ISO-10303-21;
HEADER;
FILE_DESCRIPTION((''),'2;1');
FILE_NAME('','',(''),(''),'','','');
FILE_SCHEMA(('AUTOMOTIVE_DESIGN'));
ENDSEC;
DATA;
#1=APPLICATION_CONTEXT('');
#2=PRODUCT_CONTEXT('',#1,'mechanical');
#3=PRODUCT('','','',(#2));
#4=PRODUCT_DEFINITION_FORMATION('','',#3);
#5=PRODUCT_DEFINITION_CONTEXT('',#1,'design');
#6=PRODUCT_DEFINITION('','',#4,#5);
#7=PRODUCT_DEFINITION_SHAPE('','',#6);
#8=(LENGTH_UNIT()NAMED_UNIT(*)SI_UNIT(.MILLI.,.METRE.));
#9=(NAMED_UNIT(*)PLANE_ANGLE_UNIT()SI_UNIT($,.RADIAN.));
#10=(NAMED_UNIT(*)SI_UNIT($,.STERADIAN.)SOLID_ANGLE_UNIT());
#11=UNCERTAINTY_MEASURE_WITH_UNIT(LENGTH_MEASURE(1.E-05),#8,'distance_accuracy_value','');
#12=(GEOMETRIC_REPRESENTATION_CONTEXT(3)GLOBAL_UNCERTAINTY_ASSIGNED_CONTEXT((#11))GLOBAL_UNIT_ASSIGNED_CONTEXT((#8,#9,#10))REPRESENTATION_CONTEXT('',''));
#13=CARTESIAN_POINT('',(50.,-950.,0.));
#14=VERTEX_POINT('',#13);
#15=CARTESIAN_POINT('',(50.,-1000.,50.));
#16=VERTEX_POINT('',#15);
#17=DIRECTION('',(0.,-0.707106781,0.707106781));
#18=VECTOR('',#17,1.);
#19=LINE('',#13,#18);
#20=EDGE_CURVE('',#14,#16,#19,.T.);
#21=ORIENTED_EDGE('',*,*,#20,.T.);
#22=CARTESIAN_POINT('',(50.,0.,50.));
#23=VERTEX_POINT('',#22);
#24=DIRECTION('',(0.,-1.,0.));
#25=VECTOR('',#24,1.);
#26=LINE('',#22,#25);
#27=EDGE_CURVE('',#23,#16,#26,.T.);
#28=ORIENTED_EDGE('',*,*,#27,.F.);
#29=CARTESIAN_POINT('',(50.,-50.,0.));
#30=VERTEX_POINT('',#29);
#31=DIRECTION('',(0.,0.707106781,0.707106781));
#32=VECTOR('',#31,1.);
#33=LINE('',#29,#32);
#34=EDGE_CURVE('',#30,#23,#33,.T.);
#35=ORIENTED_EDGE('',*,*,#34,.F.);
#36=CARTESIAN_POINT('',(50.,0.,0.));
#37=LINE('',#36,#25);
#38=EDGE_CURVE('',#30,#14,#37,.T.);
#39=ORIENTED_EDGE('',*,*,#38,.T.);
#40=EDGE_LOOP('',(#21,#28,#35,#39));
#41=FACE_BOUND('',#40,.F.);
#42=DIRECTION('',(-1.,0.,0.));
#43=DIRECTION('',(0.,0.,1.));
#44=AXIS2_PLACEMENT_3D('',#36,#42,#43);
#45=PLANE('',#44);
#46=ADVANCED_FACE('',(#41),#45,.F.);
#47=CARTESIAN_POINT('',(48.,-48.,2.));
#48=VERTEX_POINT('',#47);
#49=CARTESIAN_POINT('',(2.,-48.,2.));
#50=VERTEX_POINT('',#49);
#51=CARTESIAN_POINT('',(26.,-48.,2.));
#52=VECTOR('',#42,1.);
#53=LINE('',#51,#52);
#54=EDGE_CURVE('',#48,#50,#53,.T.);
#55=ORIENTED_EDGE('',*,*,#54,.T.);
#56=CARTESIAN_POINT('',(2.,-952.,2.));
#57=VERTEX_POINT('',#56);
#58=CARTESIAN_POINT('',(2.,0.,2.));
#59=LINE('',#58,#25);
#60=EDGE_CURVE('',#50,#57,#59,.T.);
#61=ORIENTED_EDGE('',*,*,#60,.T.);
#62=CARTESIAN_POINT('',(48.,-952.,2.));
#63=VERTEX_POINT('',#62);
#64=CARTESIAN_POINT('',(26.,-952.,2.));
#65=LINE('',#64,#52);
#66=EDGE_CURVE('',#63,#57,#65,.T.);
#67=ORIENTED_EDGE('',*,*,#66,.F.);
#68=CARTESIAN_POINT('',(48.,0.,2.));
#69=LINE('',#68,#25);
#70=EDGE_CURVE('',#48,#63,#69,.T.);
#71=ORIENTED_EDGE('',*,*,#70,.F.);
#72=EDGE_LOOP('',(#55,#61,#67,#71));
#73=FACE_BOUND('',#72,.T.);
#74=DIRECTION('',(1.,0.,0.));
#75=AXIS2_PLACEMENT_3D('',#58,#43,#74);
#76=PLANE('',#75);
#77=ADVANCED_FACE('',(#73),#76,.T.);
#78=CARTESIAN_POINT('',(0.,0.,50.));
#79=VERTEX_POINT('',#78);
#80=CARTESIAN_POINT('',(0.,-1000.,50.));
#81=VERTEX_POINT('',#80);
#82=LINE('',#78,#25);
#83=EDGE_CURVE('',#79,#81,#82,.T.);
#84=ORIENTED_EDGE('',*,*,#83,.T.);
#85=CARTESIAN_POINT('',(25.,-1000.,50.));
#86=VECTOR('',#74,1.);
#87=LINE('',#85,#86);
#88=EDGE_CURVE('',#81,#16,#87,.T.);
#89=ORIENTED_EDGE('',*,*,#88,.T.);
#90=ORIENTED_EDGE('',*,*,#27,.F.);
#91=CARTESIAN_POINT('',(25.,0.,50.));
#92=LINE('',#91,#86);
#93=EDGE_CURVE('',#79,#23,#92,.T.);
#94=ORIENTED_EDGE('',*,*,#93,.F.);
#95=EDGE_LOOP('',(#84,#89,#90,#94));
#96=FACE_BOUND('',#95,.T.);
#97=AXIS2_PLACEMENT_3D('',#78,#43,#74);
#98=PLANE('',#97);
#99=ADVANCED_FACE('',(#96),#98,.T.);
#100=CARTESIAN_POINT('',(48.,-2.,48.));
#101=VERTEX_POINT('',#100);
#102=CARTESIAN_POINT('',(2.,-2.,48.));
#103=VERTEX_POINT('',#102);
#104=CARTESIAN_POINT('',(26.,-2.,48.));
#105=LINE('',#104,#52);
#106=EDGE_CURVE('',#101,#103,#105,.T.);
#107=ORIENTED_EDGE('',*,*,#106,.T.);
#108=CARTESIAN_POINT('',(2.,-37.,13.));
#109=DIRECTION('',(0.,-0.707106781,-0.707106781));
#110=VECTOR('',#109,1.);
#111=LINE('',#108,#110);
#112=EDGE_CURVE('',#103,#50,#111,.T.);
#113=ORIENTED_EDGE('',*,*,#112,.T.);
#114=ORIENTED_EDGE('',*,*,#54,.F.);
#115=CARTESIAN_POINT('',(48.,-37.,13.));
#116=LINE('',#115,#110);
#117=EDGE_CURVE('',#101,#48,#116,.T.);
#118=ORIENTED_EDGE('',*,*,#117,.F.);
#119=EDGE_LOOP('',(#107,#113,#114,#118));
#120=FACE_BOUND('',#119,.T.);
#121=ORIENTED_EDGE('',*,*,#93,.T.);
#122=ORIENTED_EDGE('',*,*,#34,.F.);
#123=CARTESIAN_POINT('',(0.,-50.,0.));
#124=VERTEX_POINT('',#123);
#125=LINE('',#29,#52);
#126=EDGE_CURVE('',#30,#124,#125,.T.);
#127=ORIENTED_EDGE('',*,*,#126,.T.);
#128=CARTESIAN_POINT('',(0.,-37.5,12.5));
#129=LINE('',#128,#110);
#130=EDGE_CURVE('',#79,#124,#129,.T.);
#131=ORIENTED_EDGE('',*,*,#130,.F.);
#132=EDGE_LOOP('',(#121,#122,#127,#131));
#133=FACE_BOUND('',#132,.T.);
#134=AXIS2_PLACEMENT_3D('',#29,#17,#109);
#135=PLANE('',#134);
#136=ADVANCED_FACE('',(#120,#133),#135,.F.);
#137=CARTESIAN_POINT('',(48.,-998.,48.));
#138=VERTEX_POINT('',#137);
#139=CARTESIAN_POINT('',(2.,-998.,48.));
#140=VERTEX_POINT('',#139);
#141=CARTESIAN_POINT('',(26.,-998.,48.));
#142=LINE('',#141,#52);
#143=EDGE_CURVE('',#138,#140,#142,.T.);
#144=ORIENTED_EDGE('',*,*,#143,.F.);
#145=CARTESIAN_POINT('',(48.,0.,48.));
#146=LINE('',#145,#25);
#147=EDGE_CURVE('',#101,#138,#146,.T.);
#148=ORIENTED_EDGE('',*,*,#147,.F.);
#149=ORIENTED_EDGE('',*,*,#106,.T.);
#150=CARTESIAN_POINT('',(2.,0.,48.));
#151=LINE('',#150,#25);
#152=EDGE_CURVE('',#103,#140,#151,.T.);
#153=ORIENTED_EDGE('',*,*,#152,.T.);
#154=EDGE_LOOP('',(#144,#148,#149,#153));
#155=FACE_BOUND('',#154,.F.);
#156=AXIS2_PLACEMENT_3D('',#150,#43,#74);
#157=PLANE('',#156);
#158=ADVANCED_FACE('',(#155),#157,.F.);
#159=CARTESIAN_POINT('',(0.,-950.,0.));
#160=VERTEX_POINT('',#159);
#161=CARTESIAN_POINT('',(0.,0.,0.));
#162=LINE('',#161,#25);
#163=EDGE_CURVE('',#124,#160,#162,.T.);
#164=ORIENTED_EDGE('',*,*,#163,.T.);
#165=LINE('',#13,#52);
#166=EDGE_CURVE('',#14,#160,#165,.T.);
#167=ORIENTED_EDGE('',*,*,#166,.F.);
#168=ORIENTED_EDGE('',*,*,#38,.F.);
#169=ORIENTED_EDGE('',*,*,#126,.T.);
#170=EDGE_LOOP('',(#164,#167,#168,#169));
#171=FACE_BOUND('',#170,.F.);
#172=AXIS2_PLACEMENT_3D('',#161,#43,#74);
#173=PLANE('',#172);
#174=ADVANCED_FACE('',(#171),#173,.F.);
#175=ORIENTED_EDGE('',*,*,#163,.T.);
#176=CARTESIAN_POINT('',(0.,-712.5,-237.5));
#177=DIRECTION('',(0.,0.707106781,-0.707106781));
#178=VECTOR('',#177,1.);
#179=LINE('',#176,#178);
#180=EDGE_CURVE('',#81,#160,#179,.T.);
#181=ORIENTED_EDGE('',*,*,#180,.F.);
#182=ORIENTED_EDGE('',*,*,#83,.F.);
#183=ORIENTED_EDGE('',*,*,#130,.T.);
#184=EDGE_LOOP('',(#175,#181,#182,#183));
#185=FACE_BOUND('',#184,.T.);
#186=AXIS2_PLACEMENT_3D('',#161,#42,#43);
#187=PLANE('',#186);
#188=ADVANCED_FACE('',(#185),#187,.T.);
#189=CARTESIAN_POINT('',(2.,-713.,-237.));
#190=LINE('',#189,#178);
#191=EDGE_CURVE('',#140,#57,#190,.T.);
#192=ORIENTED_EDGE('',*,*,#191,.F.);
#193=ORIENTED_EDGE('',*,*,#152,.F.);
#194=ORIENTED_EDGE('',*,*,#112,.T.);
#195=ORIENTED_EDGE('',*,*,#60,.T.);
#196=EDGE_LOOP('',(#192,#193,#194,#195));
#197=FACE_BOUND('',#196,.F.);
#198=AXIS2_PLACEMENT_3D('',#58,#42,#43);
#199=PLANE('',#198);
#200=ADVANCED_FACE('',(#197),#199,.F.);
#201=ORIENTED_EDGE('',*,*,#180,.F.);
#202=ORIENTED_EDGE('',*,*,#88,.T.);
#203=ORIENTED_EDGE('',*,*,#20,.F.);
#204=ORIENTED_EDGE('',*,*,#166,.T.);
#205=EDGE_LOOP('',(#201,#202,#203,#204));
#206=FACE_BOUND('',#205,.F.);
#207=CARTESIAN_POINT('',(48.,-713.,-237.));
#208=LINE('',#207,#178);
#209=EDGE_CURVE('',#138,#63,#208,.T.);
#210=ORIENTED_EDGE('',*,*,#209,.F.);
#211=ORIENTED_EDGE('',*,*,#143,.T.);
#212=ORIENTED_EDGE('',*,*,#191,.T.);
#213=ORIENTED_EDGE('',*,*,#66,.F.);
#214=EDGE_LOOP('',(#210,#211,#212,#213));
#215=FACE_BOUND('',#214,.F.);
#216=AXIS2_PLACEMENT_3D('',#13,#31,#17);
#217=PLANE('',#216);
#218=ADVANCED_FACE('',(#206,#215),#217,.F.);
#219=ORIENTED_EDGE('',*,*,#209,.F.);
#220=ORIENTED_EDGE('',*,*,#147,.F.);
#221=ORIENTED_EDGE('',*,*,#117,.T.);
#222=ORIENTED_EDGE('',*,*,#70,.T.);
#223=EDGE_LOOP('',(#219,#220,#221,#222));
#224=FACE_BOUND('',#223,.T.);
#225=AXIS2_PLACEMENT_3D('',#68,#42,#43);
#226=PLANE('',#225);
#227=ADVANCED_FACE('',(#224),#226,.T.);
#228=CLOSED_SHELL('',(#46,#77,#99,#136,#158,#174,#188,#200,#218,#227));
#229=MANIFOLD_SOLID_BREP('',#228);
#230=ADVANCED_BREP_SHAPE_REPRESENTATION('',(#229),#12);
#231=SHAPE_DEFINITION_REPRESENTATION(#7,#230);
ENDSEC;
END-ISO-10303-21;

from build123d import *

# Parameters (mm, degrees)
F0_W     = 50
F0_H     = 50
F0_W_2   = 46
F0_H_2   = 46
F1_DEPTH = 1000
F3_DEPTH = 50.001


# Not quite as in the source:
# - a pattern or mirror of a feature is missing from the dataset's text; its kind, count and spacing are read off the source's solid


with BuildPart() as f1:
    # F0 (on Front) → F1 (new body)
    with BuildSketch(Plane.XZ):
        with Locations((25, 25)):
            Rectangle(F0_W, F0_H)
        with Locations((25, 25)):
            Rectangle(F0_W_2, F0_H_2, mode=Mode.SUBTRACT)
    extrude(amount=F1_DEPTH)

    # F2 (on face) → F3 (cut, through all)
    with BuildSketch(Plane.YZ.offset(50)):
        Polygon((-950, 0), (-1000, 50), (-1000, 0), align=None)
    f3 = extrude(amount=-F3_DEPTH, mode=Mode.SUBTRACT)

    # F3_copies: F3 across plane
    add(f3.mirror(Plane.ZX.offset(-500)), mode=Mode.SUBTRACT)


solid = f1.part
